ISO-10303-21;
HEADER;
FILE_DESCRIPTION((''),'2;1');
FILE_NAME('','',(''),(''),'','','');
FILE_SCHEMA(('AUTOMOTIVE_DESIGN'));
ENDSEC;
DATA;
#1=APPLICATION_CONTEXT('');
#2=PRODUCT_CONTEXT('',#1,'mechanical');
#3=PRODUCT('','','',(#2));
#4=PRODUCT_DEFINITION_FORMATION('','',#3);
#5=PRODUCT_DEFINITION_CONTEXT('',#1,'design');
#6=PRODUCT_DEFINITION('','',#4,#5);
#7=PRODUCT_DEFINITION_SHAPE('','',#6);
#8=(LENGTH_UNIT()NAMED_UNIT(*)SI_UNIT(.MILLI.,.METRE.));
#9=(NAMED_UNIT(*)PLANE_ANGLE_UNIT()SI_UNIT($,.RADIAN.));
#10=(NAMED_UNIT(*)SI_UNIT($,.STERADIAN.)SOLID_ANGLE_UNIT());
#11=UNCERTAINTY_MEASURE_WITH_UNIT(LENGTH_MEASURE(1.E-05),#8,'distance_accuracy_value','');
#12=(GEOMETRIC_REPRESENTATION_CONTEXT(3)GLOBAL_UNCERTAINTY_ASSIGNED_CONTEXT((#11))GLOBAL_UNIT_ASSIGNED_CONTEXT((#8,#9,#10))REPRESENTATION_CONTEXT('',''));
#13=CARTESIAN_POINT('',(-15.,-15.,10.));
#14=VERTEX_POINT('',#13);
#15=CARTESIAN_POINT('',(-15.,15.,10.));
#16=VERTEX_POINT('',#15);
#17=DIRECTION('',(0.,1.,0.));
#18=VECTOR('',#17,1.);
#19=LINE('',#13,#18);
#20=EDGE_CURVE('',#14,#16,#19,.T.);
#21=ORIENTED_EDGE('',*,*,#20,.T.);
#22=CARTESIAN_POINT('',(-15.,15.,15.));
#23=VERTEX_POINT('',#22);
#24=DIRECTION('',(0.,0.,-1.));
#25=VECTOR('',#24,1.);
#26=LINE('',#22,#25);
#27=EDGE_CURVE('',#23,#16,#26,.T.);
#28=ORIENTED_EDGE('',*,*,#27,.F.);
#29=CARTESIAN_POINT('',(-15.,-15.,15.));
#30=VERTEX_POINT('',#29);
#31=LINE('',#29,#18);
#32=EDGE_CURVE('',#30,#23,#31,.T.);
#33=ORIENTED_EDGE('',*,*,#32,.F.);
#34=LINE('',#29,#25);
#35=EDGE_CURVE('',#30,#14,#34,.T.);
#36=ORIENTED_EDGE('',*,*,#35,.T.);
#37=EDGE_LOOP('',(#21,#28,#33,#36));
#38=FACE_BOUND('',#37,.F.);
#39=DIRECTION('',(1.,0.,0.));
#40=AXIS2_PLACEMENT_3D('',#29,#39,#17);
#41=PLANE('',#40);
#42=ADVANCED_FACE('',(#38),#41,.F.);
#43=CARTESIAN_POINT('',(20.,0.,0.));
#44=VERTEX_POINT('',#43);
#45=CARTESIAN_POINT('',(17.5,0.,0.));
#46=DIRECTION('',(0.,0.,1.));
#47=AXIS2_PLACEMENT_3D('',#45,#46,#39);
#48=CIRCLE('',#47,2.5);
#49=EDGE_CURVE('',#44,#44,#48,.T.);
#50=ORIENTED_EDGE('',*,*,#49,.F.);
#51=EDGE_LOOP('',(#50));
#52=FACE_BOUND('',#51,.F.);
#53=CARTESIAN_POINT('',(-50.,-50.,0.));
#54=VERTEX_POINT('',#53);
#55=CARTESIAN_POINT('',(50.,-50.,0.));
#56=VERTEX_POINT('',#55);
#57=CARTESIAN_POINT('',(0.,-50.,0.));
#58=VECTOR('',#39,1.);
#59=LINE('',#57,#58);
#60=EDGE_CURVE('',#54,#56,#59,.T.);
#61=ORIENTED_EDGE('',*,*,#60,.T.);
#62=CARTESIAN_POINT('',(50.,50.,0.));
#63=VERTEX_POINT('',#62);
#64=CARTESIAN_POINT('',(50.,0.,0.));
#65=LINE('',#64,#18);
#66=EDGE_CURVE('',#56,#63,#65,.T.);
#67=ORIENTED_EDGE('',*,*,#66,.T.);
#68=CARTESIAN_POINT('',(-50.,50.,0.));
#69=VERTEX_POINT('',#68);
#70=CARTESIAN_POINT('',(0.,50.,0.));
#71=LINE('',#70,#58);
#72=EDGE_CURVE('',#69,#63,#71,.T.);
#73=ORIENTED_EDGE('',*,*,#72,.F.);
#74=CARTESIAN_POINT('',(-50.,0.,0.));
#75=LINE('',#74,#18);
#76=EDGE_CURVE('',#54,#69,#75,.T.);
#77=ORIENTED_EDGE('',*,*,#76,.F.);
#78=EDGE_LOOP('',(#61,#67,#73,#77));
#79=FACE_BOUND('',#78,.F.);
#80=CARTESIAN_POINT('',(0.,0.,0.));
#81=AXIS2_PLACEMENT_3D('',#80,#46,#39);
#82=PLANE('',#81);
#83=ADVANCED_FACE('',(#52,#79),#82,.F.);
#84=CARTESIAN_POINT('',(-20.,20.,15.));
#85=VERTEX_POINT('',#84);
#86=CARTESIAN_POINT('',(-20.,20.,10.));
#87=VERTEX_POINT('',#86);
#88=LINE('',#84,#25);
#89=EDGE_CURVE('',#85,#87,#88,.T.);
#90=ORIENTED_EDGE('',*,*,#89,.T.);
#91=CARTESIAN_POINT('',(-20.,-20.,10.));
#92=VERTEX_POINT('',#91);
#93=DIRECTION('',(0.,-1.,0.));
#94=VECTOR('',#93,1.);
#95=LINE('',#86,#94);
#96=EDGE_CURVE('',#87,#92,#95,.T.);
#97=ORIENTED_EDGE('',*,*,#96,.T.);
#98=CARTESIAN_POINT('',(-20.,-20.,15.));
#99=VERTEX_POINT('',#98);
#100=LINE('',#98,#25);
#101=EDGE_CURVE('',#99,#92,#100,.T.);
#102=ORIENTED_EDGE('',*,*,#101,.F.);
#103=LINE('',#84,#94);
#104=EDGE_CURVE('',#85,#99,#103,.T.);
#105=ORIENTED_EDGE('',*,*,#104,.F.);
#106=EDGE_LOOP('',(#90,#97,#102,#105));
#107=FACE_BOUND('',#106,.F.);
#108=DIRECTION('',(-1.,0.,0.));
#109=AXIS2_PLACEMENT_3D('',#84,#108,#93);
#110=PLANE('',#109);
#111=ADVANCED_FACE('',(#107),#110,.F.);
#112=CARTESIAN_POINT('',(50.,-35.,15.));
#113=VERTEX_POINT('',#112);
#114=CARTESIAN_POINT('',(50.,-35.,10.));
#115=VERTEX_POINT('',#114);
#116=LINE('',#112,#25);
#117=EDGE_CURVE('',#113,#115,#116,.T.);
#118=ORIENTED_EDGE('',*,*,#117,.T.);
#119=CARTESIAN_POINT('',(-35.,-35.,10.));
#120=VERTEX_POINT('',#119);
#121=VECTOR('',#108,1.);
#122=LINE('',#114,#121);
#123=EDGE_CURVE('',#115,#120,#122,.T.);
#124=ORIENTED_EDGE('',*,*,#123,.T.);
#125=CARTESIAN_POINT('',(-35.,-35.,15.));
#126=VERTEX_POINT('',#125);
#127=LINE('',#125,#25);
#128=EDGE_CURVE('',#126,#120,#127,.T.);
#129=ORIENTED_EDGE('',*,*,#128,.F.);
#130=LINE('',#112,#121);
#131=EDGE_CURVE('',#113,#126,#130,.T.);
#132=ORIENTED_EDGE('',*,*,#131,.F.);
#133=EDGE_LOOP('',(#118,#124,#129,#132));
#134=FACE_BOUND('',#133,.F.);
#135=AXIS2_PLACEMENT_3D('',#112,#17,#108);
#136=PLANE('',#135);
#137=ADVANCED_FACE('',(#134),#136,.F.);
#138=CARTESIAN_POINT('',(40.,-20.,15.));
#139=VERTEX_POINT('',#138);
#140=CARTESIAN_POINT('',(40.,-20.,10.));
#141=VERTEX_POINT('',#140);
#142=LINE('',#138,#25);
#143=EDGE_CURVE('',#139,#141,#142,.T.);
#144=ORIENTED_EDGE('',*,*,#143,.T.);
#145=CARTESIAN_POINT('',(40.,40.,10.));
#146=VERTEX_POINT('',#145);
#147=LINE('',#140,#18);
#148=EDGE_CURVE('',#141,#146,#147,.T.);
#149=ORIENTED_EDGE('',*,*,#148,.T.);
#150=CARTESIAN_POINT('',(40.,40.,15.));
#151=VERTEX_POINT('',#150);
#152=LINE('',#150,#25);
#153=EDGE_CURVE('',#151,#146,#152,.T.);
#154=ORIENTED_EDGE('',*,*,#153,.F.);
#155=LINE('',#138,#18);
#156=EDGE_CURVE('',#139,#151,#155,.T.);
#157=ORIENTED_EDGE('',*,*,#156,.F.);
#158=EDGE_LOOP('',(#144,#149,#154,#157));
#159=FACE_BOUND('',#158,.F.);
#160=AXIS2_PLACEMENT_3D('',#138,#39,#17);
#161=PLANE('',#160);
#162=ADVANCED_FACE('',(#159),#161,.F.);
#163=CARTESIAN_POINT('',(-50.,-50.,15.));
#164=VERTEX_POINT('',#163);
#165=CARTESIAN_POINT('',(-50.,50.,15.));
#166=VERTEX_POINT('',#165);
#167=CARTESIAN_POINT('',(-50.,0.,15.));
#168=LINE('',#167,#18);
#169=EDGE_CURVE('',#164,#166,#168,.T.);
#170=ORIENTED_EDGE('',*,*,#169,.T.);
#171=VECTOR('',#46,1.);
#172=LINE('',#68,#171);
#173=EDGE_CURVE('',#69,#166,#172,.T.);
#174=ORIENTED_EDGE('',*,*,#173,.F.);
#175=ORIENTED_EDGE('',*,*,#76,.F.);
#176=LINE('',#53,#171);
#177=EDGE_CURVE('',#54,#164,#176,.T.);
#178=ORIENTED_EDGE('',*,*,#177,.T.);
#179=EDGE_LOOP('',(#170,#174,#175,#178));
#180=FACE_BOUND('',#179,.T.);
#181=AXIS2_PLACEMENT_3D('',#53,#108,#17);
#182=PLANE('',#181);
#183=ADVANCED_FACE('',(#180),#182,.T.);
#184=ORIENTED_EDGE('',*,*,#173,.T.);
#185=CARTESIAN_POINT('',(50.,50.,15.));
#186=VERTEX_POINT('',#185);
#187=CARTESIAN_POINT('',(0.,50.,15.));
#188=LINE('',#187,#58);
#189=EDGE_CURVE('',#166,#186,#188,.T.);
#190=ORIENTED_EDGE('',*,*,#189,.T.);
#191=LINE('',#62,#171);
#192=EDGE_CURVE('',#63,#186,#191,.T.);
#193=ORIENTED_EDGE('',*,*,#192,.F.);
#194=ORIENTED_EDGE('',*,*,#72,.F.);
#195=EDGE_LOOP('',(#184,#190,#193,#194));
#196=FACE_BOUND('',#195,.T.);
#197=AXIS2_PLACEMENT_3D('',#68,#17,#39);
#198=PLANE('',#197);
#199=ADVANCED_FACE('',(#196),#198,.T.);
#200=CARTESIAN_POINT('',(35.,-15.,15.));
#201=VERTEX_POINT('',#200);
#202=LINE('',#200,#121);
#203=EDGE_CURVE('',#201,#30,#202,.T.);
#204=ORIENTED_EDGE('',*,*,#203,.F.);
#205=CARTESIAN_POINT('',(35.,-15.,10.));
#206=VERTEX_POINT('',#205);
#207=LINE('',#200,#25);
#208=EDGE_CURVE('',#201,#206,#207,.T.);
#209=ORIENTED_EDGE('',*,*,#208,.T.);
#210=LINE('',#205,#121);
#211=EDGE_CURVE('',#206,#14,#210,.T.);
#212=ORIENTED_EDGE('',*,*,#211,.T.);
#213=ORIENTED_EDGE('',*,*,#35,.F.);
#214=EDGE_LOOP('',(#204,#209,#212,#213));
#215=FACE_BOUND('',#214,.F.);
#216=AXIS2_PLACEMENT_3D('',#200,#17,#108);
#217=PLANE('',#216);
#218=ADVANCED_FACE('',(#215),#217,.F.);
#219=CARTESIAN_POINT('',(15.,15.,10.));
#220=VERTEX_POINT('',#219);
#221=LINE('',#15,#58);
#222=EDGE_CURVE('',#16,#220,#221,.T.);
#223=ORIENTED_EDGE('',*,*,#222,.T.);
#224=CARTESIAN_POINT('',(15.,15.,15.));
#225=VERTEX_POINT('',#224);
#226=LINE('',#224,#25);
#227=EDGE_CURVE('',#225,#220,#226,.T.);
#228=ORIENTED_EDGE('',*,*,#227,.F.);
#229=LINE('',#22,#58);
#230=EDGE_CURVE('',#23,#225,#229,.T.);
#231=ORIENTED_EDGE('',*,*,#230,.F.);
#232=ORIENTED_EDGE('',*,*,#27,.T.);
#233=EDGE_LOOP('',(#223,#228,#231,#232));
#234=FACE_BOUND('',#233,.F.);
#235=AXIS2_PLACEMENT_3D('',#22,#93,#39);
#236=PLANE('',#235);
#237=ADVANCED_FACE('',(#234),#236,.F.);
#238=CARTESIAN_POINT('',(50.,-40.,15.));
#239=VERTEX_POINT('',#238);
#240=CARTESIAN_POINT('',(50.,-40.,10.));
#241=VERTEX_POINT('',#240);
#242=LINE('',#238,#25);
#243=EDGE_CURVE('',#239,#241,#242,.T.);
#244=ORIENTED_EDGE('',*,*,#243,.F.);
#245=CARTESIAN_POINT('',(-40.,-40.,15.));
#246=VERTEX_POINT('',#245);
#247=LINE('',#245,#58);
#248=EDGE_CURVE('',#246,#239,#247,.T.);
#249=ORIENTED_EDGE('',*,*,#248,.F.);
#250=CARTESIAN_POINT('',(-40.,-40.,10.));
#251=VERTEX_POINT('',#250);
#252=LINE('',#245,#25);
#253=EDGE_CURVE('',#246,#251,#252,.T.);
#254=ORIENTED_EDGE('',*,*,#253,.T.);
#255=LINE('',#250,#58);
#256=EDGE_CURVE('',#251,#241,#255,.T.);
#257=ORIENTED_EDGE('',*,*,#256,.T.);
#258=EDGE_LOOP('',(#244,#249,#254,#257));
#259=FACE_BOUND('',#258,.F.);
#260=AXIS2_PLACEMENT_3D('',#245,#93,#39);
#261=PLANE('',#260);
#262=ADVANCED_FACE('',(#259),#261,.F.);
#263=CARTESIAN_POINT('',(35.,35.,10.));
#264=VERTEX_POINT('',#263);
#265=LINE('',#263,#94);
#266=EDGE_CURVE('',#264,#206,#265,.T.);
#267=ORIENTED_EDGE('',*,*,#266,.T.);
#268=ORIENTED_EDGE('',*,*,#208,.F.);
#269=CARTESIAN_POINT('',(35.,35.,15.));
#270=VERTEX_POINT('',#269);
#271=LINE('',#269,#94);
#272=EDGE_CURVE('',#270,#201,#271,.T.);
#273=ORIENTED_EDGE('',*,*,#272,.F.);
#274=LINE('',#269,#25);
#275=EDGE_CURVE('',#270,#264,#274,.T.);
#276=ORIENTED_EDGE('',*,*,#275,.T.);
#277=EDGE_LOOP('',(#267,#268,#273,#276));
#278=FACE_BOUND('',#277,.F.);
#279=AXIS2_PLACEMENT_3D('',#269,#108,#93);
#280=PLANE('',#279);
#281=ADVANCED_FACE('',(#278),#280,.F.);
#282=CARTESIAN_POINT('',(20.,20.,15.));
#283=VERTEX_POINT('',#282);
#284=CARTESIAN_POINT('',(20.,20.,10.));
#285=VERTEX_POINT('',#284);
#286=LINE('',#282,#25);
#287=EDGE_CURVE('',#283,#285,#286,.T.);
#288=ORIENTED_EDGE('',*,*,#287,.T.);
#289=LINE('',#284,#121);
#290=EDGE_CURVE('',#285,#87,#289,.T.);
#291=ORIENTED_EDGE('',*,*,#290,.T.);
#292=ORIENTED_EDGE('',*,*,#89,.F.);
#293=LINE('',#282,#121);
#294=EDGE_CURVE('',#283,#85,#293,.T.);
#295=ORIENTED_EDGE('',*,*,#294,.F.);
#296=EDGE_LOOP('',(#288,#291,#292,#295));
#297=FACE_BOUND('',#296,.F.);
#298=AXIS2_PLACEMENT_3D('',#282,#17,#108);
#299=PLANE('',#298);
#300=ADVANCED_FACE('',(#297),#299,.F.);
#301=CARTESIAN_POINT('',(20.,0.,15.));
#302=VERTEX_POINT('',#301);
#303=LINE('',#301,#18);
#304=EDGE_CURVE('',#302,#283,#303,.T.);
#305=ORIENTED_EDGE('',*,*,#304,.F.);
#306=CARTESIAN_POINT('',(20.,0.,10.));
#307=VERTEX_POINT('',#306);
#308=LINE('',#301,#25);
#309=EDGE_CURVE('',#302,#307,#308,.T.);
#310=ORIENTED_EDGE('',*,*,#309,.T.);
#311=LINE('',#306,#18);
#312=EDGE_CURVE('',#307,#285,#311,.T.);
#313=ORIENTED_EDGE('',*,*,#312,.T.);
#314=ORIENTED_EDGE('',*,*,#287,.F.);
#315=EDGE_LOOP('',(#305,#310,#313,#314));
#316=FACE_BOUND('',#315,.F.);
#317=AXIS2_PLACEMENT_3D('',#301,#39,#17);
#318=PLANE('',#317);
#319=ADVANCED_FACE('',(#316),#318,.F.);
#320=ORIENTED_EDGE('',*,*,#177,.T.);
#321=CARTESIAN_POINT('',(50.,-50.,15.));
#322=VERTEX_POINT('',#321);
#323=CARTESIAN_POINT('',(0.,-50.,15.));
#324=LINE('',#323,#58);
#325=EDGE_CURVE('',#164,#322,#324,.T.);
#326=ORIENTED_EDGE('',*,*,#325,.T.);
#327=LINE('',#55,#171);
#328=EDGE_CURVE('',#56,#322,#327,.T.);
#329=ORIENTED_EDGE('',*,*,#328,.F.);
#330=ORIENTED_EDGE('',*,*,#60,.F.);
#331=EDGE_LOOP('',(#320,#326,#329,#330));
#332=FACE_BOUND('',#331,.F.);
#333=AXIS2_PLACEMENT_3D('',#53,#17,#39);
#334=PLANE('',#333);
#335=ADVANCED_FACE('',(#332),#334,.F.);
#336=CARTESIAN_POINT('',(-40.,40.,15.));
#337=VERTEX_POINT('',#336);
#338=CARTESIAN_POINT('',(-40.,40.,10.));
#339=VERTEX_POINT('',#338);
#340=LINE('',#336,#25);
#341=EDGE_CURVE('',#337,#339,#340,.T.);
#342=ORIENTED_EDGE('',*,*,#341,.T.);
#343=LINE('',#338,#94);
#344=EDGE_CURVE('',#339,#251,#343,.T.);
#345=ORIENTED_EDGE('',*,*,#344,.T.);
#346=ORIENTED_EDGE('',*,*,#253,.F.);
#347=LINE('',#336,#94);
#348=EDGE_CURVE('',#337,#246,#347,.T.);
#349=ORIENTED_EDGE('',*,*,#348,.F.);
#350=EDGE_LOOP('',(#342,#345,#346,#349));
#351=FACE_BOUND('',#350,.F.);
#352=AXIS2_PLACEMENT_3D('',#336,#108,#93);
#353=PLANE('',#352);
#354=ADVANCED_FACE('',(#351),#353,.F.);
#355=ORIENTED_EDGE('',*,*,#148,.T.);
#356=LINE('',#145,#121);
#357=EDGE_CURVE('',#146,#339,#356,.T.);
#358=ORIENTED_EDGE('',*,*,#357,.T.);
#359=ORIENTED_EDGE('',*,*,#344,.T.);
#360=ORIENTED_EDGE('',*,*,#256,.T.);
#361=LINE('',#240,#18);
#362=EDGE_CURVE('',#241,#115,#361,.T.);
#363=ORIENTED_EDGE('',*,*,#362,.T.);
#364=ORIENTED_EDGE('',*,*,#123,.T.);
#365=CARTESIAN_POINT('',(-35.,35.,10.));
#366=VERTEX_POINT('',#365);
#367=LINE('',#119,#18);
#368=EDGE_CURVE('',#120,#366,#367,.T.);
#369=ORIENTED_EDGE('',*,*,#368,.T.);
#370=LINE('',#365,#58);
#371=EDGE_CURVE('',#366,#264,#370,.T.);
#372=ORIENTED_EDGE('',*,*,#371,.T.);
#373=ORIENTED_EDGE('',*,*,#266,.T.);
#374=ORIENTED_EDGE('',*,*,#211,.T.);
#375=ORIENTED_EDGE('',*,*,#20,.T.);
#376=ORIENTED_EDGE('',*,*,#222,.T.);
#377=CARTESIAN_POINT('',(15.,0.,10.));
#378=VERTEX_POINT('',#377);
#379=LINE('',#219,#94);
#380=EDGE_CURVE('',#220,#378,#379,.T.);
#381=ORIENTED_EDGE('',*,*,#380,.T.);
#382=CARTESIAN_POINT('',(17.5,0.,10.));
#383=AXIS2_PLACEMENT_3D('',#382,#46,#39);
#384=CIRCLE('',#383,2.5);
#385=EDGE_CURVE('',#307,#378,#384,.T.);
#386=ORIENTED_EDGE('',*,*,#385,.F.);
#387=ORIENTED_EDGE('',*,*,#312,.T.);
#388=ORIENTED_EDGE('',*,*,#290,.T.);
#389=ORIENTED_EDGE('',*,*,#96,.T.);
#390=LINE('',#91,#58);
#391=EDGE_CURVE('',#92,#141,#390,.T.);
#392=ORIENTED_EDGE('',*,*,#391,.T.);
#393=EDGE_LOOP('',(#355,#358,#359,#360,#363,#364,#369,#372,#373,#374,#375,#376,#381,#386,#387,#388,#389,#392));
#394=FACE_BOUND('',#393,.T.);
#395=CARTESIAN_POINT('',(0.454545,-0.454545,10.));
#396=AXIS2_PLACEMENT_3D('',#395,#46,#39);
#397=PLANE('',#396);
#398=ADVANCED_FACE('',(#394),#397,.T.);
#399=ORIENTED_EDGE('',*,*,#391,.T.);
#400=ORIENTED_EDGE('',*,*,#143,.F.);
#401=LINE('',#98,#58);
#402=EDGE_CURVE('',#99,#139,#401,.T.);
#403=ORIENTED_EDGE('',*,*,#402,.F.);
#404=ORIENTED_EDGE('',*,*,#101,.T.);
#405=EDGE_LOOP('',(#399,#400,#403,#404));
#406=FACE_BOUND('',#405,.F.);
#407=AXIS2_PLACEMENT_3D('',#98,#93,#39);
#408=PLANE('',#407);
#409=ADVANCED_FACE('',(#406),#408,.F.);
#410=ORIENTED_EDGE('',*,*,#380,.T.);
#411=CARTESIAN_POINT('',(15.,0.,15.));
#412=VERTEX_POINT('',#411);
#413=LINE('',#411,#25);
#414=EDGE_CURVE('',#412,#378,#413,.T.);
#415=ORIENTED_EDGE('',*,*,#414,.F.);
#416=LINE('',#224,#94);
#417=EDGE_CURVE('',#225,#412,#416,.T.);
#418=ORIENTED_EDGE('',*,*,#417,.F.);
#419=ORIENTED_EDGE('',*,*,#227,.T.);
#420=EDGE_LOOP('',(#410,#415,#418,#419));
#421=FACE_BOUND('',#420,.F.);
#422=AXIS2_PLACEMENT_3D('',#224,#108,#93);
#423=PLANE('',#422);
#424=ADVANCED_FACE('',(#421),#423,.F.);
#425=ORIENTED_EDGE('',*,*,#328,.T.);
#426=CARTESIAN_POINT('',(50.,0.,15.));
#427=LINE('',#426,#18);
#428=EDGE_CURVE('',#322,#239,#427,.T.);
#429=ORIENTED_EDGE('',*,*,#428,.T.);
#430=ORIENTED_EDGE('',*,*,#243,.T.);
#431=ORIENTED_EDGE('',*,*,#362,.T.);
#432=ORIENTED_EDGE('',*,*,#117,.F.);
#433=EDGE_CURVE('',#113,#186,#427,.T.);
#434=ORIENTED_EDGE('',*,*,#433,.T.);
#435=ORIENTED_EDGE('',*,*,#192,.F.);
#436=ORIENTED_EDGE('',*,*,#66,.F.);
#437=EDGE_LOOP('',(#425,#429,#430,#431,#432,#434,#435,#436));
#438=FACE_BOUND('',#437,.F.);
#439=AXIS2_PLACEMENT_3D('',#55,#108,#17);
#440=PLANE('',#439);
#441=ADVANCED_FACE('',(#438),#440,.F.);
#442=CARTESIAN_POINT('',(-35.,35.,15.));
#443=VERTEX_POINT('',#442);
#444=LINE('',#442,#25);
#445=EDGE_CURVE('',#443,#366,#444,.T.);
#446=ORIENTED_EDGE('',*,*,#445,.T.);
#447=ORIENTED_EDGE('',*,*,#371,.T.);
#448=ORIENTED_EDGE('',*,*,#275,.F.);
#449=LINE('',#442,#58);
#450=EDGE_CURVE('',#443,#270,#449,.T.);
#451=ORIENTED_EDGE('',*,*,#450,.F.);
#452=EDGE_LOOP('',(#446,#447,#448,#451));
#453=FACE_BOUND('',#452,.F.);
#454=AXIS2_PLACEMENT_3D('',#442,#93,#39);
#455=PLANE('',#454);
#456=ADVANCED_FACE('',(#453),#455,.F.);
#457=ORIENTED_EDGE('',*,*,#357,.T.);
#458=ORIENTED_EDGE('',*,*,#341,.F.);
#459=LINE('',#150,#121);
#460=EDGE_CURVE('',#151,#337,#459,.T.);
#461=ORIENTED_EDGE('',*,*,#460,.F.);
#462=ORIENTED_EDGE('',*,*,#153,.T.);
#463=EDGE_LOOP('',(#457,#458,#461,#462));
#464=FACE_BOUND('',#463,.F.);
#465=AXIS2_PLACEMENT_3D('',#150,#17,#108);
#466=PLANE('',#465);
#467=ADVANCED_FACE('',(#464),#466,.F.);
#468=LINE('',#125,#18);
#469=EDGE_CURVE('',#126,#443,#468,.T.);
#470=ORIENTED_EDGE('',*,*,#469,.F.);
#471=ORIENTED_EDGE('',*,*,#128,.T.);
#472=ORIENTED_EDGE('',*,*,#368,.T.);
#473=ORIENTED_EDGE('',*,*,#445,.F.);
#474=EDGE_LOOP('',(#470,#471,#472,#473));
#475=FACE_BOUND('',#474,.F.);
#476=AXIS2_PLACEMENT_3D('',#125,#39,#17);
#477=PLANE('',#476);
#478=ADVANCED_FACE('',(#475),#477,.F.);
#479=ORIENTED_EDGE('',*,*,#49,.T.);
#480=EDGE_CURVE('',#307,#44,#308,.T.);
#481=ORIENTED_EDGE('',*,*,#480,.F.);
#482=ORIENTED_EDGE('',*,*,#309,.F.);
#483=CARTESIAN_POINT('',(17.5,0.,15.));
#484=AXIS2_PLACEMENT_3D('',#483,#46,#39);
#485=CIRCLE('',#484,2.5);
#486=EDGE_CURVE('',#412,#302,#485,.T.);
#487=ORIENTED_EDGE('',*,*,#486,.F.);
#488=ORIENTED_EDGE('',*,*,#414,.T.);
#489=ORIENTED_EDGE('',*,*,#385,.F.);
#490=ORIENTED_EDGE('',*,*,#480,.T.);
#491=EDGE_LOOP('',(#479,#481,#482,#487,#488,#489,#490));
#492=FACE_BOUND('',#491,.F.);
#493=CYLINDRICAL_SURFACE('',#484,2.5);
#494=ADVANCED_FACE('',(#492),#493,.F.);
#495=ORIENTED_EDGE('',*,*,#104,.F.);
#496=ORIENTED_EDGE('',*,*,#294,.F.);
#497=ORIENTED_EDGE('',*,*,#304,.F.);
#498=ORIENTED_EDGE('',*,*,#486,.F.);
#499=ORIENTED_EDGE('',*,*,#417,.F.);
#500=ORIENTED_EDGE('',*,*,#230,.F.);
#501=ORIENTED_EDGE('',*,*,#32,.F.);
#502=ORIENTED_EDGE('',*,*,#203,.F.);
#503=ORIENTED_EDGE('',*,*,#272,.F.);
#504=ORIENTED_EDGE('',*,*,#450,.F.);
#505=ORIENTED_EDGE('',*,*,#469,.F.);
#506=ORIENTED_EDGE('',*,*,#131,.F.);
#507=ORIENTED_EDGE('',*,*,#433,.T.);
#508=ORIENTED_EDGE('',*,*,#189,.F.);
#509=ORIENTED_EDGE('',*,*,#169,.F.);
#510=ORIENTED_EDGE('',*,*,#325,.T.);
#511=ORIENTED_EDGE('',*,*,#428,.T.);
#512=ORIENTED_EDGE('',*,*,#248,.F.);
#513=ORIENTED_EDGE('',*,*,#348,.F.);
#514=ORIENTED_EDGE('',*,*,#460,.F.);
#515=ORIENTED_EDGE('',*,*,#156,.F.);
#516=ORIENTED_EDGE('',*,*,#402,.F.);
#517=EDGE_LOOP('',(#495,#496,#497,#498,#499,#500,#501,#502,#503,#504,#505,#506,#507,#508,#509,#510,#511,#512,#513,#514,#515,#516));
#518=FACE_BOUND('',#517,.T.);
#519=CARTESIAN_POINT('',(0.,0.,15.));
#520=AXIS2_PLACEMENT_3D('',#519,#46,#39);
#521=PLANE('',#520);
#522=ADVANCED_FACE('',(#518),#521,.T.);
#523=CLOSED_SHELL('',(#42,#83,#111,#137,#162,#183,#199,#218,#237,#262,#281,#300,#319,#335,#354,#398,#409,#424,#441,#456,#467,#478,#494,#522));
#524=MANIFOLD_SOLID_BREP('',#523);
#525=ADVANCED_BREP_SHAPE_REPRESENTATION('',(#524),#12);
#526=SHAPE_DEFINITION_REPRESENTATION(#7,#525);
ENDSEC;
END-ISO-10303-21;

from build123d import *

# Parameters (mm, degrees)
F0_W     = 100
F0_H     = 100
F1_DEPTH = 15
F3_DEPTH = 5
F4_R     = 2.5
F5_DEPTH = 15.001


with BuildPart() as f1:
    # F0 (on Top) → F1 (new body)
    with BuildSketch(Plane.XY):
        Rectangle(F0_W, F0_H)
    extrude(amount=F1_DEPTH)

    # F2 (on face) → F3 (cut)
    with BuildSketch(Plane.XY.offset(15)):
        Polygon((-40, -40), (50, -40), (50, -35), (-35, -35), (-35, 35), (35, 35), (35, -15), (-15, -15), (-15, 15), (15, 15), (15, 0), (20, 0), (20, 20), (-20, 20), (-20, -20), (40, -20), (40, 40), (-40, 40), align=None)
    extrude(amount=-F3_DEPTH, mode=Mode.SUBTRACT)

    # F4 (on face) → F5 (cut, through all)
    with BuildSketch(Plane.XY.offset(15)):
        with Locations((17.5, 0)):
            Circle(F4_R)
    extrude(amount=-F5_DEPTH, mode=Mode.SUBTRACT)


solid = f1.part
